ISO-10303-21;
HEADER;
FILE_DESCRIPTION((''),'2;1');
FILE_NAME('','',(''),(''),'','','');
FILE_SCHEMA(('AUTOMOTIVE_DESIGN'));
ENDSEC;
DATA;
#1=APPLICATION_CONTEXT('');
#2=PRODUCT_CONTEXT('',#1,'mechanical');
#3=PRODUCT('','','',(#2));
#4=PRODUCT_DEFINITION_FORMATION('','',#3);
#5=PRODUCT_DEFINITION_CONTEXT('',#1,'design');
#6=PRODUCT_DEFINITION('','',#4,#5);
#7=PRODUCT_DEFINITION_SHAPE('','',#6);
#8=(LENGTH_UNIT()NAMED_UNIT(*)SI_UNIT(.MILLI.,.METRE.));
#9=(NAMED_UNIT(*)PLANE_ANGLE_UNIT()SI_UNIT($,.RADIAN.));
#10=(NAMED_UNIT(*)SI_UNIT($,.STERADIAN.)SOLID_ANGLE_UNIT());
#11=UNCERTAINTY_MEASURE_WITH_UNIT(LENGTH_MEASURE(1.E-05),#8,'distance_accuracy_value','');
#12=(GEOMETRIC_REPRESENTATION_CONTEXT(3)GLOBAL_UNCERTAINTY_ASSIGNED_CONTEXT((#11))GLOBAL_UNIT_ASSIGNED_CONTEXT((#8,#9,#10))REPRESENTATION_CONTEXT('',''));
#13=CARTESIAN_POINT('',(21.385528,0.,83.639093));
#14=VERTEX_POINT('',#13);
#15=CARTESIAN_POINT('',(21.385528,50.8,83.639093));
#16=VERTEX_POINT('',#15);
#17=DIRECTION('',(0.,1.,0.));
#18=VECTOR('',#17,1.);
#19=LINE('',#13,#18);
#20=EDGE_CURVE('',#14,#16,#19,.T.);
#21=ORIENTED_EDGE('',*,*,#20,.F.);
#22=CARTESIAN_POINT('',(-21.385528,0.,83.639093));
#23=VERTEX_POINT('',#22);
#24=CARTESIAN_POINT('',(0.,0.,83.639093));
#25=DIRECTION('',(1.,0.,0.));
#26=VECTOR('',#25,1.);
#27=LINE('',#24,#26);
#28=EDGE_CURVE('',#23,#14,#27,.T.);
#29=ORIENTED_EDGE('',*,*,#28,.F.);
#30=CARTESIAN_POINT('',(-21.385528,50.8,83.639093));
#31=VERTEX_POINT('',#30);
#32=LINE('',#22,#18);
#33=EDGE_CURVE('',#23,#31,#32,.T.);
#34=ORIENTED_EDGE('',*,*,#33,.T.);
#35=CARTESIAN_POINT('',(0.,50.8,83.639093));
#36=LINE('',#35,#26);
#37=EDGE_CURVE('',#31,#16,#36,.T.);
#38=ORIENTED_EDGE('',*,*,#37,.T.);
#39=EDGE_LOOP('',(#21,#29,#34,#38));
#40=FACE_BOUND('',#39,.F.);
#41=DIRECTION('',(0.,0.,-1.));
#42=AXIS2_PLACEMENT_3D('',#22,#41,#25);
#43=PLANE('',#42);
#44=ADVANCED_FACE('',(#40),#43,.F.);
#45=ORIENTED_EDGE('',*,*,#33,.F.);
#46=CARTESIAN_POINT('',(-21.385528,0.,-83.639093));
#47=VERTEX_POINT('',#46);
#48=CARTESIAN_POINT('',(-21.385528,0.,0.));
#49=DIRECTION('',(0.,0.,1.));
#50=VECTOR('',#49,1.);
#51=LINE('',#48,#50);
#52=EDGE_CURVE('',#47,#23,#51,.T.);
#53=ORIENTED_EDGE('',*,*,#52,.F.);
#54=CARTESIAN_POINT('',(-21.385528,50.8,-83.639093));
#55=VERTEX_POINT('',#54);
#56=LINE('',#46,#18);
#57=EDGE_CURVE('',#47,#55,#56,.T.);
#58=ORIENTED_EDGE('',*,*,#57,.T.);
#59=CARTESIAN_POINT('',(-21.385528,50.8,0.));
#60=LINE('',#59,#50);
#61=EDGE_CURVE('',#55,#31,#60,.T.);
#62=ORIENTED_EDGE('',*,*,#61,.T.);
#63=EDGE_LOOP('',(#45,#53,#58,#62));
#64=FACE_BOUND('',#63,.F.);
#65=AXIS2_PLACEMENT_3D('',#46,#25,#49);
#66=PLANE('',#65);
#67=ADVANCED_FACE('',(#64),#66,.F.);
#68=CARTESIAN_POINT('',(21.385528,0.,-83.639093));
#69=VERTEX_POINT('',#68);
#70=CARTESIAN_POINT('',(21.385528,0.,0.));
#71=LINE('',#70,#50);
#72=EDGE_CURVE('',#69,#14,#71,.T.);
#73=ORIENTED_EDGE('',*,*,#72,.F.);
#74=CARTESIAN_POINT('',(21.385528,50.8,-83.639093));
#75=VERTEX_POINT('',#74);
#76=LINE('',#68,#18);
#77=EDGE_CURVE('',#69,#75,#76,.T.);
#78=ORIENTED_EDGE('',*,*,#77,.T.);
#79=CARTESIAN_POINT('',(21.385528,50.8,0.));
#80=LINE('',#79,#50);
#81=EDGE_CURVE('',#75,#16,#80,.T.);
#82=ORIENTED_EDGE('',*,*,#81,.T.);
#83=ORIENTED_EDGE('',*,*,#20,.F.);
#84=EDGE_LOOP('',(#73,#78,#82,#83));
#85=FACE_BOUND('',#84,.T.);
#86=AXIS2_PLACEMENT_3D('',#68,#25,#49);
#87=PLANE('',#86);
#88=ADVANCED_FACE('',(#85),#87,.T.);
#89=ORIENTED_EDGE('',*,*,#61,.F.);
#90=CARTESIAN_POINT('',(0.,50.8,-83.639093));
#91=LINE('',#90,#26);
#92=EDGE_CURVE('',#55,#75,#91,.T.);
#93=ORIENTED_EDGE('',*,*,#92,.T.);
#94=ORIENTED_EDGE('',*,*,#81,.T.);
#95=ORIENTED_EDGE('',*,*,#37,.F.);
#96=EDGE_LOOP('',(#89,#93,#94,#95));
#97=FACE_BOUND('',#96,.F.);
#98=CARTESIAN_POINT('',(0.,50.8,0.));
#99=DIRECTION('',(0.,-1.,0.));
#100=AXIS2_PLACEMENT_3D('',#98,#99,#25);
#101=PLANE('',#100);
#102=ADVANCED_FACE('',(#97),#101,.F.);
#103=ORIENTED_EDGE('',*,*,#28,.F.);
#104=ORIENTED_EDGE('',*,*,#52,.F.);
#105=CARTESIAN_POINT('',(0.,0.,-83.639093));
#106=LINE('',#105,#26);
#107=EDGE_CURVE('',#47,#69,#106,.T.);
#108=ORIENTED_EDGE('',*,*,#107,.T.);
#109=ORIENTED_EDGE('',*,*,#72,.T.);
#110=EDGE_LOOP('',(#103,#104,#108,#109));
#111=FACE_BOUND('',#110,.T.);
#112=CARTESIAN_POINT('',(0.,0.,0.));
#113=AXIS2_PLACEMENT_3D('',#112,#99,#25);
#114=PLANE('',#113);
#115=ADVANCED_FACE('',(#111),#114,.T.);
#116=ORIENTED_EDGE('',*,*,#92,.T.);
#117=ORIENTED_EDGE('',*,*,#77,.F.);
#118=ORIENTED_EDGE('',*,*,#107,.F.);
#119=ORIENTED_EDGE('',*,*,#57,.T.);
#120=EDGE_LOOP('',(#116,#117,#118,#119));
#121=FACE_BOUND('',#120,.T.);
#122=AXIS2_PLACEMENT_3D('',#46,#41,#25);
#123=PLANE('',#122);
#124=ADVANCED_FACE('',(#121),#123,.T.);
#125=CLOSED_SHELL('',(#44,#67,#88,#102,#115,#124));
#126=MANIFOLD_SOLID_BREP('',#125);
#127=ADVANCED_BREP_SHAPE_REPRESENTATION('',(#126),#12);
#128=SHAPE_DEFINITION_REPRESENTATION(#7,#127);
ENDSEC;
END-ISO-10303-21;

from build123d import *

# Parameters (mm, degrees)
F0_W     = 42.7710562944
F0_H     = 167.2781854868
F1_DEPTH = 50.8


# Not quite as in the source:
# - a feature of the source that left no trace in its solid (it failed there, or was rolled back) is left out


with BuildPart() as f1:
    # F0 (on Front) → F1 (new body)
    with BuildSketch(Plane.XZ):
        Rectangle(F0_W, F0_H)
    extrude(amount=-F1_DEPTH)


solid = f1.part
